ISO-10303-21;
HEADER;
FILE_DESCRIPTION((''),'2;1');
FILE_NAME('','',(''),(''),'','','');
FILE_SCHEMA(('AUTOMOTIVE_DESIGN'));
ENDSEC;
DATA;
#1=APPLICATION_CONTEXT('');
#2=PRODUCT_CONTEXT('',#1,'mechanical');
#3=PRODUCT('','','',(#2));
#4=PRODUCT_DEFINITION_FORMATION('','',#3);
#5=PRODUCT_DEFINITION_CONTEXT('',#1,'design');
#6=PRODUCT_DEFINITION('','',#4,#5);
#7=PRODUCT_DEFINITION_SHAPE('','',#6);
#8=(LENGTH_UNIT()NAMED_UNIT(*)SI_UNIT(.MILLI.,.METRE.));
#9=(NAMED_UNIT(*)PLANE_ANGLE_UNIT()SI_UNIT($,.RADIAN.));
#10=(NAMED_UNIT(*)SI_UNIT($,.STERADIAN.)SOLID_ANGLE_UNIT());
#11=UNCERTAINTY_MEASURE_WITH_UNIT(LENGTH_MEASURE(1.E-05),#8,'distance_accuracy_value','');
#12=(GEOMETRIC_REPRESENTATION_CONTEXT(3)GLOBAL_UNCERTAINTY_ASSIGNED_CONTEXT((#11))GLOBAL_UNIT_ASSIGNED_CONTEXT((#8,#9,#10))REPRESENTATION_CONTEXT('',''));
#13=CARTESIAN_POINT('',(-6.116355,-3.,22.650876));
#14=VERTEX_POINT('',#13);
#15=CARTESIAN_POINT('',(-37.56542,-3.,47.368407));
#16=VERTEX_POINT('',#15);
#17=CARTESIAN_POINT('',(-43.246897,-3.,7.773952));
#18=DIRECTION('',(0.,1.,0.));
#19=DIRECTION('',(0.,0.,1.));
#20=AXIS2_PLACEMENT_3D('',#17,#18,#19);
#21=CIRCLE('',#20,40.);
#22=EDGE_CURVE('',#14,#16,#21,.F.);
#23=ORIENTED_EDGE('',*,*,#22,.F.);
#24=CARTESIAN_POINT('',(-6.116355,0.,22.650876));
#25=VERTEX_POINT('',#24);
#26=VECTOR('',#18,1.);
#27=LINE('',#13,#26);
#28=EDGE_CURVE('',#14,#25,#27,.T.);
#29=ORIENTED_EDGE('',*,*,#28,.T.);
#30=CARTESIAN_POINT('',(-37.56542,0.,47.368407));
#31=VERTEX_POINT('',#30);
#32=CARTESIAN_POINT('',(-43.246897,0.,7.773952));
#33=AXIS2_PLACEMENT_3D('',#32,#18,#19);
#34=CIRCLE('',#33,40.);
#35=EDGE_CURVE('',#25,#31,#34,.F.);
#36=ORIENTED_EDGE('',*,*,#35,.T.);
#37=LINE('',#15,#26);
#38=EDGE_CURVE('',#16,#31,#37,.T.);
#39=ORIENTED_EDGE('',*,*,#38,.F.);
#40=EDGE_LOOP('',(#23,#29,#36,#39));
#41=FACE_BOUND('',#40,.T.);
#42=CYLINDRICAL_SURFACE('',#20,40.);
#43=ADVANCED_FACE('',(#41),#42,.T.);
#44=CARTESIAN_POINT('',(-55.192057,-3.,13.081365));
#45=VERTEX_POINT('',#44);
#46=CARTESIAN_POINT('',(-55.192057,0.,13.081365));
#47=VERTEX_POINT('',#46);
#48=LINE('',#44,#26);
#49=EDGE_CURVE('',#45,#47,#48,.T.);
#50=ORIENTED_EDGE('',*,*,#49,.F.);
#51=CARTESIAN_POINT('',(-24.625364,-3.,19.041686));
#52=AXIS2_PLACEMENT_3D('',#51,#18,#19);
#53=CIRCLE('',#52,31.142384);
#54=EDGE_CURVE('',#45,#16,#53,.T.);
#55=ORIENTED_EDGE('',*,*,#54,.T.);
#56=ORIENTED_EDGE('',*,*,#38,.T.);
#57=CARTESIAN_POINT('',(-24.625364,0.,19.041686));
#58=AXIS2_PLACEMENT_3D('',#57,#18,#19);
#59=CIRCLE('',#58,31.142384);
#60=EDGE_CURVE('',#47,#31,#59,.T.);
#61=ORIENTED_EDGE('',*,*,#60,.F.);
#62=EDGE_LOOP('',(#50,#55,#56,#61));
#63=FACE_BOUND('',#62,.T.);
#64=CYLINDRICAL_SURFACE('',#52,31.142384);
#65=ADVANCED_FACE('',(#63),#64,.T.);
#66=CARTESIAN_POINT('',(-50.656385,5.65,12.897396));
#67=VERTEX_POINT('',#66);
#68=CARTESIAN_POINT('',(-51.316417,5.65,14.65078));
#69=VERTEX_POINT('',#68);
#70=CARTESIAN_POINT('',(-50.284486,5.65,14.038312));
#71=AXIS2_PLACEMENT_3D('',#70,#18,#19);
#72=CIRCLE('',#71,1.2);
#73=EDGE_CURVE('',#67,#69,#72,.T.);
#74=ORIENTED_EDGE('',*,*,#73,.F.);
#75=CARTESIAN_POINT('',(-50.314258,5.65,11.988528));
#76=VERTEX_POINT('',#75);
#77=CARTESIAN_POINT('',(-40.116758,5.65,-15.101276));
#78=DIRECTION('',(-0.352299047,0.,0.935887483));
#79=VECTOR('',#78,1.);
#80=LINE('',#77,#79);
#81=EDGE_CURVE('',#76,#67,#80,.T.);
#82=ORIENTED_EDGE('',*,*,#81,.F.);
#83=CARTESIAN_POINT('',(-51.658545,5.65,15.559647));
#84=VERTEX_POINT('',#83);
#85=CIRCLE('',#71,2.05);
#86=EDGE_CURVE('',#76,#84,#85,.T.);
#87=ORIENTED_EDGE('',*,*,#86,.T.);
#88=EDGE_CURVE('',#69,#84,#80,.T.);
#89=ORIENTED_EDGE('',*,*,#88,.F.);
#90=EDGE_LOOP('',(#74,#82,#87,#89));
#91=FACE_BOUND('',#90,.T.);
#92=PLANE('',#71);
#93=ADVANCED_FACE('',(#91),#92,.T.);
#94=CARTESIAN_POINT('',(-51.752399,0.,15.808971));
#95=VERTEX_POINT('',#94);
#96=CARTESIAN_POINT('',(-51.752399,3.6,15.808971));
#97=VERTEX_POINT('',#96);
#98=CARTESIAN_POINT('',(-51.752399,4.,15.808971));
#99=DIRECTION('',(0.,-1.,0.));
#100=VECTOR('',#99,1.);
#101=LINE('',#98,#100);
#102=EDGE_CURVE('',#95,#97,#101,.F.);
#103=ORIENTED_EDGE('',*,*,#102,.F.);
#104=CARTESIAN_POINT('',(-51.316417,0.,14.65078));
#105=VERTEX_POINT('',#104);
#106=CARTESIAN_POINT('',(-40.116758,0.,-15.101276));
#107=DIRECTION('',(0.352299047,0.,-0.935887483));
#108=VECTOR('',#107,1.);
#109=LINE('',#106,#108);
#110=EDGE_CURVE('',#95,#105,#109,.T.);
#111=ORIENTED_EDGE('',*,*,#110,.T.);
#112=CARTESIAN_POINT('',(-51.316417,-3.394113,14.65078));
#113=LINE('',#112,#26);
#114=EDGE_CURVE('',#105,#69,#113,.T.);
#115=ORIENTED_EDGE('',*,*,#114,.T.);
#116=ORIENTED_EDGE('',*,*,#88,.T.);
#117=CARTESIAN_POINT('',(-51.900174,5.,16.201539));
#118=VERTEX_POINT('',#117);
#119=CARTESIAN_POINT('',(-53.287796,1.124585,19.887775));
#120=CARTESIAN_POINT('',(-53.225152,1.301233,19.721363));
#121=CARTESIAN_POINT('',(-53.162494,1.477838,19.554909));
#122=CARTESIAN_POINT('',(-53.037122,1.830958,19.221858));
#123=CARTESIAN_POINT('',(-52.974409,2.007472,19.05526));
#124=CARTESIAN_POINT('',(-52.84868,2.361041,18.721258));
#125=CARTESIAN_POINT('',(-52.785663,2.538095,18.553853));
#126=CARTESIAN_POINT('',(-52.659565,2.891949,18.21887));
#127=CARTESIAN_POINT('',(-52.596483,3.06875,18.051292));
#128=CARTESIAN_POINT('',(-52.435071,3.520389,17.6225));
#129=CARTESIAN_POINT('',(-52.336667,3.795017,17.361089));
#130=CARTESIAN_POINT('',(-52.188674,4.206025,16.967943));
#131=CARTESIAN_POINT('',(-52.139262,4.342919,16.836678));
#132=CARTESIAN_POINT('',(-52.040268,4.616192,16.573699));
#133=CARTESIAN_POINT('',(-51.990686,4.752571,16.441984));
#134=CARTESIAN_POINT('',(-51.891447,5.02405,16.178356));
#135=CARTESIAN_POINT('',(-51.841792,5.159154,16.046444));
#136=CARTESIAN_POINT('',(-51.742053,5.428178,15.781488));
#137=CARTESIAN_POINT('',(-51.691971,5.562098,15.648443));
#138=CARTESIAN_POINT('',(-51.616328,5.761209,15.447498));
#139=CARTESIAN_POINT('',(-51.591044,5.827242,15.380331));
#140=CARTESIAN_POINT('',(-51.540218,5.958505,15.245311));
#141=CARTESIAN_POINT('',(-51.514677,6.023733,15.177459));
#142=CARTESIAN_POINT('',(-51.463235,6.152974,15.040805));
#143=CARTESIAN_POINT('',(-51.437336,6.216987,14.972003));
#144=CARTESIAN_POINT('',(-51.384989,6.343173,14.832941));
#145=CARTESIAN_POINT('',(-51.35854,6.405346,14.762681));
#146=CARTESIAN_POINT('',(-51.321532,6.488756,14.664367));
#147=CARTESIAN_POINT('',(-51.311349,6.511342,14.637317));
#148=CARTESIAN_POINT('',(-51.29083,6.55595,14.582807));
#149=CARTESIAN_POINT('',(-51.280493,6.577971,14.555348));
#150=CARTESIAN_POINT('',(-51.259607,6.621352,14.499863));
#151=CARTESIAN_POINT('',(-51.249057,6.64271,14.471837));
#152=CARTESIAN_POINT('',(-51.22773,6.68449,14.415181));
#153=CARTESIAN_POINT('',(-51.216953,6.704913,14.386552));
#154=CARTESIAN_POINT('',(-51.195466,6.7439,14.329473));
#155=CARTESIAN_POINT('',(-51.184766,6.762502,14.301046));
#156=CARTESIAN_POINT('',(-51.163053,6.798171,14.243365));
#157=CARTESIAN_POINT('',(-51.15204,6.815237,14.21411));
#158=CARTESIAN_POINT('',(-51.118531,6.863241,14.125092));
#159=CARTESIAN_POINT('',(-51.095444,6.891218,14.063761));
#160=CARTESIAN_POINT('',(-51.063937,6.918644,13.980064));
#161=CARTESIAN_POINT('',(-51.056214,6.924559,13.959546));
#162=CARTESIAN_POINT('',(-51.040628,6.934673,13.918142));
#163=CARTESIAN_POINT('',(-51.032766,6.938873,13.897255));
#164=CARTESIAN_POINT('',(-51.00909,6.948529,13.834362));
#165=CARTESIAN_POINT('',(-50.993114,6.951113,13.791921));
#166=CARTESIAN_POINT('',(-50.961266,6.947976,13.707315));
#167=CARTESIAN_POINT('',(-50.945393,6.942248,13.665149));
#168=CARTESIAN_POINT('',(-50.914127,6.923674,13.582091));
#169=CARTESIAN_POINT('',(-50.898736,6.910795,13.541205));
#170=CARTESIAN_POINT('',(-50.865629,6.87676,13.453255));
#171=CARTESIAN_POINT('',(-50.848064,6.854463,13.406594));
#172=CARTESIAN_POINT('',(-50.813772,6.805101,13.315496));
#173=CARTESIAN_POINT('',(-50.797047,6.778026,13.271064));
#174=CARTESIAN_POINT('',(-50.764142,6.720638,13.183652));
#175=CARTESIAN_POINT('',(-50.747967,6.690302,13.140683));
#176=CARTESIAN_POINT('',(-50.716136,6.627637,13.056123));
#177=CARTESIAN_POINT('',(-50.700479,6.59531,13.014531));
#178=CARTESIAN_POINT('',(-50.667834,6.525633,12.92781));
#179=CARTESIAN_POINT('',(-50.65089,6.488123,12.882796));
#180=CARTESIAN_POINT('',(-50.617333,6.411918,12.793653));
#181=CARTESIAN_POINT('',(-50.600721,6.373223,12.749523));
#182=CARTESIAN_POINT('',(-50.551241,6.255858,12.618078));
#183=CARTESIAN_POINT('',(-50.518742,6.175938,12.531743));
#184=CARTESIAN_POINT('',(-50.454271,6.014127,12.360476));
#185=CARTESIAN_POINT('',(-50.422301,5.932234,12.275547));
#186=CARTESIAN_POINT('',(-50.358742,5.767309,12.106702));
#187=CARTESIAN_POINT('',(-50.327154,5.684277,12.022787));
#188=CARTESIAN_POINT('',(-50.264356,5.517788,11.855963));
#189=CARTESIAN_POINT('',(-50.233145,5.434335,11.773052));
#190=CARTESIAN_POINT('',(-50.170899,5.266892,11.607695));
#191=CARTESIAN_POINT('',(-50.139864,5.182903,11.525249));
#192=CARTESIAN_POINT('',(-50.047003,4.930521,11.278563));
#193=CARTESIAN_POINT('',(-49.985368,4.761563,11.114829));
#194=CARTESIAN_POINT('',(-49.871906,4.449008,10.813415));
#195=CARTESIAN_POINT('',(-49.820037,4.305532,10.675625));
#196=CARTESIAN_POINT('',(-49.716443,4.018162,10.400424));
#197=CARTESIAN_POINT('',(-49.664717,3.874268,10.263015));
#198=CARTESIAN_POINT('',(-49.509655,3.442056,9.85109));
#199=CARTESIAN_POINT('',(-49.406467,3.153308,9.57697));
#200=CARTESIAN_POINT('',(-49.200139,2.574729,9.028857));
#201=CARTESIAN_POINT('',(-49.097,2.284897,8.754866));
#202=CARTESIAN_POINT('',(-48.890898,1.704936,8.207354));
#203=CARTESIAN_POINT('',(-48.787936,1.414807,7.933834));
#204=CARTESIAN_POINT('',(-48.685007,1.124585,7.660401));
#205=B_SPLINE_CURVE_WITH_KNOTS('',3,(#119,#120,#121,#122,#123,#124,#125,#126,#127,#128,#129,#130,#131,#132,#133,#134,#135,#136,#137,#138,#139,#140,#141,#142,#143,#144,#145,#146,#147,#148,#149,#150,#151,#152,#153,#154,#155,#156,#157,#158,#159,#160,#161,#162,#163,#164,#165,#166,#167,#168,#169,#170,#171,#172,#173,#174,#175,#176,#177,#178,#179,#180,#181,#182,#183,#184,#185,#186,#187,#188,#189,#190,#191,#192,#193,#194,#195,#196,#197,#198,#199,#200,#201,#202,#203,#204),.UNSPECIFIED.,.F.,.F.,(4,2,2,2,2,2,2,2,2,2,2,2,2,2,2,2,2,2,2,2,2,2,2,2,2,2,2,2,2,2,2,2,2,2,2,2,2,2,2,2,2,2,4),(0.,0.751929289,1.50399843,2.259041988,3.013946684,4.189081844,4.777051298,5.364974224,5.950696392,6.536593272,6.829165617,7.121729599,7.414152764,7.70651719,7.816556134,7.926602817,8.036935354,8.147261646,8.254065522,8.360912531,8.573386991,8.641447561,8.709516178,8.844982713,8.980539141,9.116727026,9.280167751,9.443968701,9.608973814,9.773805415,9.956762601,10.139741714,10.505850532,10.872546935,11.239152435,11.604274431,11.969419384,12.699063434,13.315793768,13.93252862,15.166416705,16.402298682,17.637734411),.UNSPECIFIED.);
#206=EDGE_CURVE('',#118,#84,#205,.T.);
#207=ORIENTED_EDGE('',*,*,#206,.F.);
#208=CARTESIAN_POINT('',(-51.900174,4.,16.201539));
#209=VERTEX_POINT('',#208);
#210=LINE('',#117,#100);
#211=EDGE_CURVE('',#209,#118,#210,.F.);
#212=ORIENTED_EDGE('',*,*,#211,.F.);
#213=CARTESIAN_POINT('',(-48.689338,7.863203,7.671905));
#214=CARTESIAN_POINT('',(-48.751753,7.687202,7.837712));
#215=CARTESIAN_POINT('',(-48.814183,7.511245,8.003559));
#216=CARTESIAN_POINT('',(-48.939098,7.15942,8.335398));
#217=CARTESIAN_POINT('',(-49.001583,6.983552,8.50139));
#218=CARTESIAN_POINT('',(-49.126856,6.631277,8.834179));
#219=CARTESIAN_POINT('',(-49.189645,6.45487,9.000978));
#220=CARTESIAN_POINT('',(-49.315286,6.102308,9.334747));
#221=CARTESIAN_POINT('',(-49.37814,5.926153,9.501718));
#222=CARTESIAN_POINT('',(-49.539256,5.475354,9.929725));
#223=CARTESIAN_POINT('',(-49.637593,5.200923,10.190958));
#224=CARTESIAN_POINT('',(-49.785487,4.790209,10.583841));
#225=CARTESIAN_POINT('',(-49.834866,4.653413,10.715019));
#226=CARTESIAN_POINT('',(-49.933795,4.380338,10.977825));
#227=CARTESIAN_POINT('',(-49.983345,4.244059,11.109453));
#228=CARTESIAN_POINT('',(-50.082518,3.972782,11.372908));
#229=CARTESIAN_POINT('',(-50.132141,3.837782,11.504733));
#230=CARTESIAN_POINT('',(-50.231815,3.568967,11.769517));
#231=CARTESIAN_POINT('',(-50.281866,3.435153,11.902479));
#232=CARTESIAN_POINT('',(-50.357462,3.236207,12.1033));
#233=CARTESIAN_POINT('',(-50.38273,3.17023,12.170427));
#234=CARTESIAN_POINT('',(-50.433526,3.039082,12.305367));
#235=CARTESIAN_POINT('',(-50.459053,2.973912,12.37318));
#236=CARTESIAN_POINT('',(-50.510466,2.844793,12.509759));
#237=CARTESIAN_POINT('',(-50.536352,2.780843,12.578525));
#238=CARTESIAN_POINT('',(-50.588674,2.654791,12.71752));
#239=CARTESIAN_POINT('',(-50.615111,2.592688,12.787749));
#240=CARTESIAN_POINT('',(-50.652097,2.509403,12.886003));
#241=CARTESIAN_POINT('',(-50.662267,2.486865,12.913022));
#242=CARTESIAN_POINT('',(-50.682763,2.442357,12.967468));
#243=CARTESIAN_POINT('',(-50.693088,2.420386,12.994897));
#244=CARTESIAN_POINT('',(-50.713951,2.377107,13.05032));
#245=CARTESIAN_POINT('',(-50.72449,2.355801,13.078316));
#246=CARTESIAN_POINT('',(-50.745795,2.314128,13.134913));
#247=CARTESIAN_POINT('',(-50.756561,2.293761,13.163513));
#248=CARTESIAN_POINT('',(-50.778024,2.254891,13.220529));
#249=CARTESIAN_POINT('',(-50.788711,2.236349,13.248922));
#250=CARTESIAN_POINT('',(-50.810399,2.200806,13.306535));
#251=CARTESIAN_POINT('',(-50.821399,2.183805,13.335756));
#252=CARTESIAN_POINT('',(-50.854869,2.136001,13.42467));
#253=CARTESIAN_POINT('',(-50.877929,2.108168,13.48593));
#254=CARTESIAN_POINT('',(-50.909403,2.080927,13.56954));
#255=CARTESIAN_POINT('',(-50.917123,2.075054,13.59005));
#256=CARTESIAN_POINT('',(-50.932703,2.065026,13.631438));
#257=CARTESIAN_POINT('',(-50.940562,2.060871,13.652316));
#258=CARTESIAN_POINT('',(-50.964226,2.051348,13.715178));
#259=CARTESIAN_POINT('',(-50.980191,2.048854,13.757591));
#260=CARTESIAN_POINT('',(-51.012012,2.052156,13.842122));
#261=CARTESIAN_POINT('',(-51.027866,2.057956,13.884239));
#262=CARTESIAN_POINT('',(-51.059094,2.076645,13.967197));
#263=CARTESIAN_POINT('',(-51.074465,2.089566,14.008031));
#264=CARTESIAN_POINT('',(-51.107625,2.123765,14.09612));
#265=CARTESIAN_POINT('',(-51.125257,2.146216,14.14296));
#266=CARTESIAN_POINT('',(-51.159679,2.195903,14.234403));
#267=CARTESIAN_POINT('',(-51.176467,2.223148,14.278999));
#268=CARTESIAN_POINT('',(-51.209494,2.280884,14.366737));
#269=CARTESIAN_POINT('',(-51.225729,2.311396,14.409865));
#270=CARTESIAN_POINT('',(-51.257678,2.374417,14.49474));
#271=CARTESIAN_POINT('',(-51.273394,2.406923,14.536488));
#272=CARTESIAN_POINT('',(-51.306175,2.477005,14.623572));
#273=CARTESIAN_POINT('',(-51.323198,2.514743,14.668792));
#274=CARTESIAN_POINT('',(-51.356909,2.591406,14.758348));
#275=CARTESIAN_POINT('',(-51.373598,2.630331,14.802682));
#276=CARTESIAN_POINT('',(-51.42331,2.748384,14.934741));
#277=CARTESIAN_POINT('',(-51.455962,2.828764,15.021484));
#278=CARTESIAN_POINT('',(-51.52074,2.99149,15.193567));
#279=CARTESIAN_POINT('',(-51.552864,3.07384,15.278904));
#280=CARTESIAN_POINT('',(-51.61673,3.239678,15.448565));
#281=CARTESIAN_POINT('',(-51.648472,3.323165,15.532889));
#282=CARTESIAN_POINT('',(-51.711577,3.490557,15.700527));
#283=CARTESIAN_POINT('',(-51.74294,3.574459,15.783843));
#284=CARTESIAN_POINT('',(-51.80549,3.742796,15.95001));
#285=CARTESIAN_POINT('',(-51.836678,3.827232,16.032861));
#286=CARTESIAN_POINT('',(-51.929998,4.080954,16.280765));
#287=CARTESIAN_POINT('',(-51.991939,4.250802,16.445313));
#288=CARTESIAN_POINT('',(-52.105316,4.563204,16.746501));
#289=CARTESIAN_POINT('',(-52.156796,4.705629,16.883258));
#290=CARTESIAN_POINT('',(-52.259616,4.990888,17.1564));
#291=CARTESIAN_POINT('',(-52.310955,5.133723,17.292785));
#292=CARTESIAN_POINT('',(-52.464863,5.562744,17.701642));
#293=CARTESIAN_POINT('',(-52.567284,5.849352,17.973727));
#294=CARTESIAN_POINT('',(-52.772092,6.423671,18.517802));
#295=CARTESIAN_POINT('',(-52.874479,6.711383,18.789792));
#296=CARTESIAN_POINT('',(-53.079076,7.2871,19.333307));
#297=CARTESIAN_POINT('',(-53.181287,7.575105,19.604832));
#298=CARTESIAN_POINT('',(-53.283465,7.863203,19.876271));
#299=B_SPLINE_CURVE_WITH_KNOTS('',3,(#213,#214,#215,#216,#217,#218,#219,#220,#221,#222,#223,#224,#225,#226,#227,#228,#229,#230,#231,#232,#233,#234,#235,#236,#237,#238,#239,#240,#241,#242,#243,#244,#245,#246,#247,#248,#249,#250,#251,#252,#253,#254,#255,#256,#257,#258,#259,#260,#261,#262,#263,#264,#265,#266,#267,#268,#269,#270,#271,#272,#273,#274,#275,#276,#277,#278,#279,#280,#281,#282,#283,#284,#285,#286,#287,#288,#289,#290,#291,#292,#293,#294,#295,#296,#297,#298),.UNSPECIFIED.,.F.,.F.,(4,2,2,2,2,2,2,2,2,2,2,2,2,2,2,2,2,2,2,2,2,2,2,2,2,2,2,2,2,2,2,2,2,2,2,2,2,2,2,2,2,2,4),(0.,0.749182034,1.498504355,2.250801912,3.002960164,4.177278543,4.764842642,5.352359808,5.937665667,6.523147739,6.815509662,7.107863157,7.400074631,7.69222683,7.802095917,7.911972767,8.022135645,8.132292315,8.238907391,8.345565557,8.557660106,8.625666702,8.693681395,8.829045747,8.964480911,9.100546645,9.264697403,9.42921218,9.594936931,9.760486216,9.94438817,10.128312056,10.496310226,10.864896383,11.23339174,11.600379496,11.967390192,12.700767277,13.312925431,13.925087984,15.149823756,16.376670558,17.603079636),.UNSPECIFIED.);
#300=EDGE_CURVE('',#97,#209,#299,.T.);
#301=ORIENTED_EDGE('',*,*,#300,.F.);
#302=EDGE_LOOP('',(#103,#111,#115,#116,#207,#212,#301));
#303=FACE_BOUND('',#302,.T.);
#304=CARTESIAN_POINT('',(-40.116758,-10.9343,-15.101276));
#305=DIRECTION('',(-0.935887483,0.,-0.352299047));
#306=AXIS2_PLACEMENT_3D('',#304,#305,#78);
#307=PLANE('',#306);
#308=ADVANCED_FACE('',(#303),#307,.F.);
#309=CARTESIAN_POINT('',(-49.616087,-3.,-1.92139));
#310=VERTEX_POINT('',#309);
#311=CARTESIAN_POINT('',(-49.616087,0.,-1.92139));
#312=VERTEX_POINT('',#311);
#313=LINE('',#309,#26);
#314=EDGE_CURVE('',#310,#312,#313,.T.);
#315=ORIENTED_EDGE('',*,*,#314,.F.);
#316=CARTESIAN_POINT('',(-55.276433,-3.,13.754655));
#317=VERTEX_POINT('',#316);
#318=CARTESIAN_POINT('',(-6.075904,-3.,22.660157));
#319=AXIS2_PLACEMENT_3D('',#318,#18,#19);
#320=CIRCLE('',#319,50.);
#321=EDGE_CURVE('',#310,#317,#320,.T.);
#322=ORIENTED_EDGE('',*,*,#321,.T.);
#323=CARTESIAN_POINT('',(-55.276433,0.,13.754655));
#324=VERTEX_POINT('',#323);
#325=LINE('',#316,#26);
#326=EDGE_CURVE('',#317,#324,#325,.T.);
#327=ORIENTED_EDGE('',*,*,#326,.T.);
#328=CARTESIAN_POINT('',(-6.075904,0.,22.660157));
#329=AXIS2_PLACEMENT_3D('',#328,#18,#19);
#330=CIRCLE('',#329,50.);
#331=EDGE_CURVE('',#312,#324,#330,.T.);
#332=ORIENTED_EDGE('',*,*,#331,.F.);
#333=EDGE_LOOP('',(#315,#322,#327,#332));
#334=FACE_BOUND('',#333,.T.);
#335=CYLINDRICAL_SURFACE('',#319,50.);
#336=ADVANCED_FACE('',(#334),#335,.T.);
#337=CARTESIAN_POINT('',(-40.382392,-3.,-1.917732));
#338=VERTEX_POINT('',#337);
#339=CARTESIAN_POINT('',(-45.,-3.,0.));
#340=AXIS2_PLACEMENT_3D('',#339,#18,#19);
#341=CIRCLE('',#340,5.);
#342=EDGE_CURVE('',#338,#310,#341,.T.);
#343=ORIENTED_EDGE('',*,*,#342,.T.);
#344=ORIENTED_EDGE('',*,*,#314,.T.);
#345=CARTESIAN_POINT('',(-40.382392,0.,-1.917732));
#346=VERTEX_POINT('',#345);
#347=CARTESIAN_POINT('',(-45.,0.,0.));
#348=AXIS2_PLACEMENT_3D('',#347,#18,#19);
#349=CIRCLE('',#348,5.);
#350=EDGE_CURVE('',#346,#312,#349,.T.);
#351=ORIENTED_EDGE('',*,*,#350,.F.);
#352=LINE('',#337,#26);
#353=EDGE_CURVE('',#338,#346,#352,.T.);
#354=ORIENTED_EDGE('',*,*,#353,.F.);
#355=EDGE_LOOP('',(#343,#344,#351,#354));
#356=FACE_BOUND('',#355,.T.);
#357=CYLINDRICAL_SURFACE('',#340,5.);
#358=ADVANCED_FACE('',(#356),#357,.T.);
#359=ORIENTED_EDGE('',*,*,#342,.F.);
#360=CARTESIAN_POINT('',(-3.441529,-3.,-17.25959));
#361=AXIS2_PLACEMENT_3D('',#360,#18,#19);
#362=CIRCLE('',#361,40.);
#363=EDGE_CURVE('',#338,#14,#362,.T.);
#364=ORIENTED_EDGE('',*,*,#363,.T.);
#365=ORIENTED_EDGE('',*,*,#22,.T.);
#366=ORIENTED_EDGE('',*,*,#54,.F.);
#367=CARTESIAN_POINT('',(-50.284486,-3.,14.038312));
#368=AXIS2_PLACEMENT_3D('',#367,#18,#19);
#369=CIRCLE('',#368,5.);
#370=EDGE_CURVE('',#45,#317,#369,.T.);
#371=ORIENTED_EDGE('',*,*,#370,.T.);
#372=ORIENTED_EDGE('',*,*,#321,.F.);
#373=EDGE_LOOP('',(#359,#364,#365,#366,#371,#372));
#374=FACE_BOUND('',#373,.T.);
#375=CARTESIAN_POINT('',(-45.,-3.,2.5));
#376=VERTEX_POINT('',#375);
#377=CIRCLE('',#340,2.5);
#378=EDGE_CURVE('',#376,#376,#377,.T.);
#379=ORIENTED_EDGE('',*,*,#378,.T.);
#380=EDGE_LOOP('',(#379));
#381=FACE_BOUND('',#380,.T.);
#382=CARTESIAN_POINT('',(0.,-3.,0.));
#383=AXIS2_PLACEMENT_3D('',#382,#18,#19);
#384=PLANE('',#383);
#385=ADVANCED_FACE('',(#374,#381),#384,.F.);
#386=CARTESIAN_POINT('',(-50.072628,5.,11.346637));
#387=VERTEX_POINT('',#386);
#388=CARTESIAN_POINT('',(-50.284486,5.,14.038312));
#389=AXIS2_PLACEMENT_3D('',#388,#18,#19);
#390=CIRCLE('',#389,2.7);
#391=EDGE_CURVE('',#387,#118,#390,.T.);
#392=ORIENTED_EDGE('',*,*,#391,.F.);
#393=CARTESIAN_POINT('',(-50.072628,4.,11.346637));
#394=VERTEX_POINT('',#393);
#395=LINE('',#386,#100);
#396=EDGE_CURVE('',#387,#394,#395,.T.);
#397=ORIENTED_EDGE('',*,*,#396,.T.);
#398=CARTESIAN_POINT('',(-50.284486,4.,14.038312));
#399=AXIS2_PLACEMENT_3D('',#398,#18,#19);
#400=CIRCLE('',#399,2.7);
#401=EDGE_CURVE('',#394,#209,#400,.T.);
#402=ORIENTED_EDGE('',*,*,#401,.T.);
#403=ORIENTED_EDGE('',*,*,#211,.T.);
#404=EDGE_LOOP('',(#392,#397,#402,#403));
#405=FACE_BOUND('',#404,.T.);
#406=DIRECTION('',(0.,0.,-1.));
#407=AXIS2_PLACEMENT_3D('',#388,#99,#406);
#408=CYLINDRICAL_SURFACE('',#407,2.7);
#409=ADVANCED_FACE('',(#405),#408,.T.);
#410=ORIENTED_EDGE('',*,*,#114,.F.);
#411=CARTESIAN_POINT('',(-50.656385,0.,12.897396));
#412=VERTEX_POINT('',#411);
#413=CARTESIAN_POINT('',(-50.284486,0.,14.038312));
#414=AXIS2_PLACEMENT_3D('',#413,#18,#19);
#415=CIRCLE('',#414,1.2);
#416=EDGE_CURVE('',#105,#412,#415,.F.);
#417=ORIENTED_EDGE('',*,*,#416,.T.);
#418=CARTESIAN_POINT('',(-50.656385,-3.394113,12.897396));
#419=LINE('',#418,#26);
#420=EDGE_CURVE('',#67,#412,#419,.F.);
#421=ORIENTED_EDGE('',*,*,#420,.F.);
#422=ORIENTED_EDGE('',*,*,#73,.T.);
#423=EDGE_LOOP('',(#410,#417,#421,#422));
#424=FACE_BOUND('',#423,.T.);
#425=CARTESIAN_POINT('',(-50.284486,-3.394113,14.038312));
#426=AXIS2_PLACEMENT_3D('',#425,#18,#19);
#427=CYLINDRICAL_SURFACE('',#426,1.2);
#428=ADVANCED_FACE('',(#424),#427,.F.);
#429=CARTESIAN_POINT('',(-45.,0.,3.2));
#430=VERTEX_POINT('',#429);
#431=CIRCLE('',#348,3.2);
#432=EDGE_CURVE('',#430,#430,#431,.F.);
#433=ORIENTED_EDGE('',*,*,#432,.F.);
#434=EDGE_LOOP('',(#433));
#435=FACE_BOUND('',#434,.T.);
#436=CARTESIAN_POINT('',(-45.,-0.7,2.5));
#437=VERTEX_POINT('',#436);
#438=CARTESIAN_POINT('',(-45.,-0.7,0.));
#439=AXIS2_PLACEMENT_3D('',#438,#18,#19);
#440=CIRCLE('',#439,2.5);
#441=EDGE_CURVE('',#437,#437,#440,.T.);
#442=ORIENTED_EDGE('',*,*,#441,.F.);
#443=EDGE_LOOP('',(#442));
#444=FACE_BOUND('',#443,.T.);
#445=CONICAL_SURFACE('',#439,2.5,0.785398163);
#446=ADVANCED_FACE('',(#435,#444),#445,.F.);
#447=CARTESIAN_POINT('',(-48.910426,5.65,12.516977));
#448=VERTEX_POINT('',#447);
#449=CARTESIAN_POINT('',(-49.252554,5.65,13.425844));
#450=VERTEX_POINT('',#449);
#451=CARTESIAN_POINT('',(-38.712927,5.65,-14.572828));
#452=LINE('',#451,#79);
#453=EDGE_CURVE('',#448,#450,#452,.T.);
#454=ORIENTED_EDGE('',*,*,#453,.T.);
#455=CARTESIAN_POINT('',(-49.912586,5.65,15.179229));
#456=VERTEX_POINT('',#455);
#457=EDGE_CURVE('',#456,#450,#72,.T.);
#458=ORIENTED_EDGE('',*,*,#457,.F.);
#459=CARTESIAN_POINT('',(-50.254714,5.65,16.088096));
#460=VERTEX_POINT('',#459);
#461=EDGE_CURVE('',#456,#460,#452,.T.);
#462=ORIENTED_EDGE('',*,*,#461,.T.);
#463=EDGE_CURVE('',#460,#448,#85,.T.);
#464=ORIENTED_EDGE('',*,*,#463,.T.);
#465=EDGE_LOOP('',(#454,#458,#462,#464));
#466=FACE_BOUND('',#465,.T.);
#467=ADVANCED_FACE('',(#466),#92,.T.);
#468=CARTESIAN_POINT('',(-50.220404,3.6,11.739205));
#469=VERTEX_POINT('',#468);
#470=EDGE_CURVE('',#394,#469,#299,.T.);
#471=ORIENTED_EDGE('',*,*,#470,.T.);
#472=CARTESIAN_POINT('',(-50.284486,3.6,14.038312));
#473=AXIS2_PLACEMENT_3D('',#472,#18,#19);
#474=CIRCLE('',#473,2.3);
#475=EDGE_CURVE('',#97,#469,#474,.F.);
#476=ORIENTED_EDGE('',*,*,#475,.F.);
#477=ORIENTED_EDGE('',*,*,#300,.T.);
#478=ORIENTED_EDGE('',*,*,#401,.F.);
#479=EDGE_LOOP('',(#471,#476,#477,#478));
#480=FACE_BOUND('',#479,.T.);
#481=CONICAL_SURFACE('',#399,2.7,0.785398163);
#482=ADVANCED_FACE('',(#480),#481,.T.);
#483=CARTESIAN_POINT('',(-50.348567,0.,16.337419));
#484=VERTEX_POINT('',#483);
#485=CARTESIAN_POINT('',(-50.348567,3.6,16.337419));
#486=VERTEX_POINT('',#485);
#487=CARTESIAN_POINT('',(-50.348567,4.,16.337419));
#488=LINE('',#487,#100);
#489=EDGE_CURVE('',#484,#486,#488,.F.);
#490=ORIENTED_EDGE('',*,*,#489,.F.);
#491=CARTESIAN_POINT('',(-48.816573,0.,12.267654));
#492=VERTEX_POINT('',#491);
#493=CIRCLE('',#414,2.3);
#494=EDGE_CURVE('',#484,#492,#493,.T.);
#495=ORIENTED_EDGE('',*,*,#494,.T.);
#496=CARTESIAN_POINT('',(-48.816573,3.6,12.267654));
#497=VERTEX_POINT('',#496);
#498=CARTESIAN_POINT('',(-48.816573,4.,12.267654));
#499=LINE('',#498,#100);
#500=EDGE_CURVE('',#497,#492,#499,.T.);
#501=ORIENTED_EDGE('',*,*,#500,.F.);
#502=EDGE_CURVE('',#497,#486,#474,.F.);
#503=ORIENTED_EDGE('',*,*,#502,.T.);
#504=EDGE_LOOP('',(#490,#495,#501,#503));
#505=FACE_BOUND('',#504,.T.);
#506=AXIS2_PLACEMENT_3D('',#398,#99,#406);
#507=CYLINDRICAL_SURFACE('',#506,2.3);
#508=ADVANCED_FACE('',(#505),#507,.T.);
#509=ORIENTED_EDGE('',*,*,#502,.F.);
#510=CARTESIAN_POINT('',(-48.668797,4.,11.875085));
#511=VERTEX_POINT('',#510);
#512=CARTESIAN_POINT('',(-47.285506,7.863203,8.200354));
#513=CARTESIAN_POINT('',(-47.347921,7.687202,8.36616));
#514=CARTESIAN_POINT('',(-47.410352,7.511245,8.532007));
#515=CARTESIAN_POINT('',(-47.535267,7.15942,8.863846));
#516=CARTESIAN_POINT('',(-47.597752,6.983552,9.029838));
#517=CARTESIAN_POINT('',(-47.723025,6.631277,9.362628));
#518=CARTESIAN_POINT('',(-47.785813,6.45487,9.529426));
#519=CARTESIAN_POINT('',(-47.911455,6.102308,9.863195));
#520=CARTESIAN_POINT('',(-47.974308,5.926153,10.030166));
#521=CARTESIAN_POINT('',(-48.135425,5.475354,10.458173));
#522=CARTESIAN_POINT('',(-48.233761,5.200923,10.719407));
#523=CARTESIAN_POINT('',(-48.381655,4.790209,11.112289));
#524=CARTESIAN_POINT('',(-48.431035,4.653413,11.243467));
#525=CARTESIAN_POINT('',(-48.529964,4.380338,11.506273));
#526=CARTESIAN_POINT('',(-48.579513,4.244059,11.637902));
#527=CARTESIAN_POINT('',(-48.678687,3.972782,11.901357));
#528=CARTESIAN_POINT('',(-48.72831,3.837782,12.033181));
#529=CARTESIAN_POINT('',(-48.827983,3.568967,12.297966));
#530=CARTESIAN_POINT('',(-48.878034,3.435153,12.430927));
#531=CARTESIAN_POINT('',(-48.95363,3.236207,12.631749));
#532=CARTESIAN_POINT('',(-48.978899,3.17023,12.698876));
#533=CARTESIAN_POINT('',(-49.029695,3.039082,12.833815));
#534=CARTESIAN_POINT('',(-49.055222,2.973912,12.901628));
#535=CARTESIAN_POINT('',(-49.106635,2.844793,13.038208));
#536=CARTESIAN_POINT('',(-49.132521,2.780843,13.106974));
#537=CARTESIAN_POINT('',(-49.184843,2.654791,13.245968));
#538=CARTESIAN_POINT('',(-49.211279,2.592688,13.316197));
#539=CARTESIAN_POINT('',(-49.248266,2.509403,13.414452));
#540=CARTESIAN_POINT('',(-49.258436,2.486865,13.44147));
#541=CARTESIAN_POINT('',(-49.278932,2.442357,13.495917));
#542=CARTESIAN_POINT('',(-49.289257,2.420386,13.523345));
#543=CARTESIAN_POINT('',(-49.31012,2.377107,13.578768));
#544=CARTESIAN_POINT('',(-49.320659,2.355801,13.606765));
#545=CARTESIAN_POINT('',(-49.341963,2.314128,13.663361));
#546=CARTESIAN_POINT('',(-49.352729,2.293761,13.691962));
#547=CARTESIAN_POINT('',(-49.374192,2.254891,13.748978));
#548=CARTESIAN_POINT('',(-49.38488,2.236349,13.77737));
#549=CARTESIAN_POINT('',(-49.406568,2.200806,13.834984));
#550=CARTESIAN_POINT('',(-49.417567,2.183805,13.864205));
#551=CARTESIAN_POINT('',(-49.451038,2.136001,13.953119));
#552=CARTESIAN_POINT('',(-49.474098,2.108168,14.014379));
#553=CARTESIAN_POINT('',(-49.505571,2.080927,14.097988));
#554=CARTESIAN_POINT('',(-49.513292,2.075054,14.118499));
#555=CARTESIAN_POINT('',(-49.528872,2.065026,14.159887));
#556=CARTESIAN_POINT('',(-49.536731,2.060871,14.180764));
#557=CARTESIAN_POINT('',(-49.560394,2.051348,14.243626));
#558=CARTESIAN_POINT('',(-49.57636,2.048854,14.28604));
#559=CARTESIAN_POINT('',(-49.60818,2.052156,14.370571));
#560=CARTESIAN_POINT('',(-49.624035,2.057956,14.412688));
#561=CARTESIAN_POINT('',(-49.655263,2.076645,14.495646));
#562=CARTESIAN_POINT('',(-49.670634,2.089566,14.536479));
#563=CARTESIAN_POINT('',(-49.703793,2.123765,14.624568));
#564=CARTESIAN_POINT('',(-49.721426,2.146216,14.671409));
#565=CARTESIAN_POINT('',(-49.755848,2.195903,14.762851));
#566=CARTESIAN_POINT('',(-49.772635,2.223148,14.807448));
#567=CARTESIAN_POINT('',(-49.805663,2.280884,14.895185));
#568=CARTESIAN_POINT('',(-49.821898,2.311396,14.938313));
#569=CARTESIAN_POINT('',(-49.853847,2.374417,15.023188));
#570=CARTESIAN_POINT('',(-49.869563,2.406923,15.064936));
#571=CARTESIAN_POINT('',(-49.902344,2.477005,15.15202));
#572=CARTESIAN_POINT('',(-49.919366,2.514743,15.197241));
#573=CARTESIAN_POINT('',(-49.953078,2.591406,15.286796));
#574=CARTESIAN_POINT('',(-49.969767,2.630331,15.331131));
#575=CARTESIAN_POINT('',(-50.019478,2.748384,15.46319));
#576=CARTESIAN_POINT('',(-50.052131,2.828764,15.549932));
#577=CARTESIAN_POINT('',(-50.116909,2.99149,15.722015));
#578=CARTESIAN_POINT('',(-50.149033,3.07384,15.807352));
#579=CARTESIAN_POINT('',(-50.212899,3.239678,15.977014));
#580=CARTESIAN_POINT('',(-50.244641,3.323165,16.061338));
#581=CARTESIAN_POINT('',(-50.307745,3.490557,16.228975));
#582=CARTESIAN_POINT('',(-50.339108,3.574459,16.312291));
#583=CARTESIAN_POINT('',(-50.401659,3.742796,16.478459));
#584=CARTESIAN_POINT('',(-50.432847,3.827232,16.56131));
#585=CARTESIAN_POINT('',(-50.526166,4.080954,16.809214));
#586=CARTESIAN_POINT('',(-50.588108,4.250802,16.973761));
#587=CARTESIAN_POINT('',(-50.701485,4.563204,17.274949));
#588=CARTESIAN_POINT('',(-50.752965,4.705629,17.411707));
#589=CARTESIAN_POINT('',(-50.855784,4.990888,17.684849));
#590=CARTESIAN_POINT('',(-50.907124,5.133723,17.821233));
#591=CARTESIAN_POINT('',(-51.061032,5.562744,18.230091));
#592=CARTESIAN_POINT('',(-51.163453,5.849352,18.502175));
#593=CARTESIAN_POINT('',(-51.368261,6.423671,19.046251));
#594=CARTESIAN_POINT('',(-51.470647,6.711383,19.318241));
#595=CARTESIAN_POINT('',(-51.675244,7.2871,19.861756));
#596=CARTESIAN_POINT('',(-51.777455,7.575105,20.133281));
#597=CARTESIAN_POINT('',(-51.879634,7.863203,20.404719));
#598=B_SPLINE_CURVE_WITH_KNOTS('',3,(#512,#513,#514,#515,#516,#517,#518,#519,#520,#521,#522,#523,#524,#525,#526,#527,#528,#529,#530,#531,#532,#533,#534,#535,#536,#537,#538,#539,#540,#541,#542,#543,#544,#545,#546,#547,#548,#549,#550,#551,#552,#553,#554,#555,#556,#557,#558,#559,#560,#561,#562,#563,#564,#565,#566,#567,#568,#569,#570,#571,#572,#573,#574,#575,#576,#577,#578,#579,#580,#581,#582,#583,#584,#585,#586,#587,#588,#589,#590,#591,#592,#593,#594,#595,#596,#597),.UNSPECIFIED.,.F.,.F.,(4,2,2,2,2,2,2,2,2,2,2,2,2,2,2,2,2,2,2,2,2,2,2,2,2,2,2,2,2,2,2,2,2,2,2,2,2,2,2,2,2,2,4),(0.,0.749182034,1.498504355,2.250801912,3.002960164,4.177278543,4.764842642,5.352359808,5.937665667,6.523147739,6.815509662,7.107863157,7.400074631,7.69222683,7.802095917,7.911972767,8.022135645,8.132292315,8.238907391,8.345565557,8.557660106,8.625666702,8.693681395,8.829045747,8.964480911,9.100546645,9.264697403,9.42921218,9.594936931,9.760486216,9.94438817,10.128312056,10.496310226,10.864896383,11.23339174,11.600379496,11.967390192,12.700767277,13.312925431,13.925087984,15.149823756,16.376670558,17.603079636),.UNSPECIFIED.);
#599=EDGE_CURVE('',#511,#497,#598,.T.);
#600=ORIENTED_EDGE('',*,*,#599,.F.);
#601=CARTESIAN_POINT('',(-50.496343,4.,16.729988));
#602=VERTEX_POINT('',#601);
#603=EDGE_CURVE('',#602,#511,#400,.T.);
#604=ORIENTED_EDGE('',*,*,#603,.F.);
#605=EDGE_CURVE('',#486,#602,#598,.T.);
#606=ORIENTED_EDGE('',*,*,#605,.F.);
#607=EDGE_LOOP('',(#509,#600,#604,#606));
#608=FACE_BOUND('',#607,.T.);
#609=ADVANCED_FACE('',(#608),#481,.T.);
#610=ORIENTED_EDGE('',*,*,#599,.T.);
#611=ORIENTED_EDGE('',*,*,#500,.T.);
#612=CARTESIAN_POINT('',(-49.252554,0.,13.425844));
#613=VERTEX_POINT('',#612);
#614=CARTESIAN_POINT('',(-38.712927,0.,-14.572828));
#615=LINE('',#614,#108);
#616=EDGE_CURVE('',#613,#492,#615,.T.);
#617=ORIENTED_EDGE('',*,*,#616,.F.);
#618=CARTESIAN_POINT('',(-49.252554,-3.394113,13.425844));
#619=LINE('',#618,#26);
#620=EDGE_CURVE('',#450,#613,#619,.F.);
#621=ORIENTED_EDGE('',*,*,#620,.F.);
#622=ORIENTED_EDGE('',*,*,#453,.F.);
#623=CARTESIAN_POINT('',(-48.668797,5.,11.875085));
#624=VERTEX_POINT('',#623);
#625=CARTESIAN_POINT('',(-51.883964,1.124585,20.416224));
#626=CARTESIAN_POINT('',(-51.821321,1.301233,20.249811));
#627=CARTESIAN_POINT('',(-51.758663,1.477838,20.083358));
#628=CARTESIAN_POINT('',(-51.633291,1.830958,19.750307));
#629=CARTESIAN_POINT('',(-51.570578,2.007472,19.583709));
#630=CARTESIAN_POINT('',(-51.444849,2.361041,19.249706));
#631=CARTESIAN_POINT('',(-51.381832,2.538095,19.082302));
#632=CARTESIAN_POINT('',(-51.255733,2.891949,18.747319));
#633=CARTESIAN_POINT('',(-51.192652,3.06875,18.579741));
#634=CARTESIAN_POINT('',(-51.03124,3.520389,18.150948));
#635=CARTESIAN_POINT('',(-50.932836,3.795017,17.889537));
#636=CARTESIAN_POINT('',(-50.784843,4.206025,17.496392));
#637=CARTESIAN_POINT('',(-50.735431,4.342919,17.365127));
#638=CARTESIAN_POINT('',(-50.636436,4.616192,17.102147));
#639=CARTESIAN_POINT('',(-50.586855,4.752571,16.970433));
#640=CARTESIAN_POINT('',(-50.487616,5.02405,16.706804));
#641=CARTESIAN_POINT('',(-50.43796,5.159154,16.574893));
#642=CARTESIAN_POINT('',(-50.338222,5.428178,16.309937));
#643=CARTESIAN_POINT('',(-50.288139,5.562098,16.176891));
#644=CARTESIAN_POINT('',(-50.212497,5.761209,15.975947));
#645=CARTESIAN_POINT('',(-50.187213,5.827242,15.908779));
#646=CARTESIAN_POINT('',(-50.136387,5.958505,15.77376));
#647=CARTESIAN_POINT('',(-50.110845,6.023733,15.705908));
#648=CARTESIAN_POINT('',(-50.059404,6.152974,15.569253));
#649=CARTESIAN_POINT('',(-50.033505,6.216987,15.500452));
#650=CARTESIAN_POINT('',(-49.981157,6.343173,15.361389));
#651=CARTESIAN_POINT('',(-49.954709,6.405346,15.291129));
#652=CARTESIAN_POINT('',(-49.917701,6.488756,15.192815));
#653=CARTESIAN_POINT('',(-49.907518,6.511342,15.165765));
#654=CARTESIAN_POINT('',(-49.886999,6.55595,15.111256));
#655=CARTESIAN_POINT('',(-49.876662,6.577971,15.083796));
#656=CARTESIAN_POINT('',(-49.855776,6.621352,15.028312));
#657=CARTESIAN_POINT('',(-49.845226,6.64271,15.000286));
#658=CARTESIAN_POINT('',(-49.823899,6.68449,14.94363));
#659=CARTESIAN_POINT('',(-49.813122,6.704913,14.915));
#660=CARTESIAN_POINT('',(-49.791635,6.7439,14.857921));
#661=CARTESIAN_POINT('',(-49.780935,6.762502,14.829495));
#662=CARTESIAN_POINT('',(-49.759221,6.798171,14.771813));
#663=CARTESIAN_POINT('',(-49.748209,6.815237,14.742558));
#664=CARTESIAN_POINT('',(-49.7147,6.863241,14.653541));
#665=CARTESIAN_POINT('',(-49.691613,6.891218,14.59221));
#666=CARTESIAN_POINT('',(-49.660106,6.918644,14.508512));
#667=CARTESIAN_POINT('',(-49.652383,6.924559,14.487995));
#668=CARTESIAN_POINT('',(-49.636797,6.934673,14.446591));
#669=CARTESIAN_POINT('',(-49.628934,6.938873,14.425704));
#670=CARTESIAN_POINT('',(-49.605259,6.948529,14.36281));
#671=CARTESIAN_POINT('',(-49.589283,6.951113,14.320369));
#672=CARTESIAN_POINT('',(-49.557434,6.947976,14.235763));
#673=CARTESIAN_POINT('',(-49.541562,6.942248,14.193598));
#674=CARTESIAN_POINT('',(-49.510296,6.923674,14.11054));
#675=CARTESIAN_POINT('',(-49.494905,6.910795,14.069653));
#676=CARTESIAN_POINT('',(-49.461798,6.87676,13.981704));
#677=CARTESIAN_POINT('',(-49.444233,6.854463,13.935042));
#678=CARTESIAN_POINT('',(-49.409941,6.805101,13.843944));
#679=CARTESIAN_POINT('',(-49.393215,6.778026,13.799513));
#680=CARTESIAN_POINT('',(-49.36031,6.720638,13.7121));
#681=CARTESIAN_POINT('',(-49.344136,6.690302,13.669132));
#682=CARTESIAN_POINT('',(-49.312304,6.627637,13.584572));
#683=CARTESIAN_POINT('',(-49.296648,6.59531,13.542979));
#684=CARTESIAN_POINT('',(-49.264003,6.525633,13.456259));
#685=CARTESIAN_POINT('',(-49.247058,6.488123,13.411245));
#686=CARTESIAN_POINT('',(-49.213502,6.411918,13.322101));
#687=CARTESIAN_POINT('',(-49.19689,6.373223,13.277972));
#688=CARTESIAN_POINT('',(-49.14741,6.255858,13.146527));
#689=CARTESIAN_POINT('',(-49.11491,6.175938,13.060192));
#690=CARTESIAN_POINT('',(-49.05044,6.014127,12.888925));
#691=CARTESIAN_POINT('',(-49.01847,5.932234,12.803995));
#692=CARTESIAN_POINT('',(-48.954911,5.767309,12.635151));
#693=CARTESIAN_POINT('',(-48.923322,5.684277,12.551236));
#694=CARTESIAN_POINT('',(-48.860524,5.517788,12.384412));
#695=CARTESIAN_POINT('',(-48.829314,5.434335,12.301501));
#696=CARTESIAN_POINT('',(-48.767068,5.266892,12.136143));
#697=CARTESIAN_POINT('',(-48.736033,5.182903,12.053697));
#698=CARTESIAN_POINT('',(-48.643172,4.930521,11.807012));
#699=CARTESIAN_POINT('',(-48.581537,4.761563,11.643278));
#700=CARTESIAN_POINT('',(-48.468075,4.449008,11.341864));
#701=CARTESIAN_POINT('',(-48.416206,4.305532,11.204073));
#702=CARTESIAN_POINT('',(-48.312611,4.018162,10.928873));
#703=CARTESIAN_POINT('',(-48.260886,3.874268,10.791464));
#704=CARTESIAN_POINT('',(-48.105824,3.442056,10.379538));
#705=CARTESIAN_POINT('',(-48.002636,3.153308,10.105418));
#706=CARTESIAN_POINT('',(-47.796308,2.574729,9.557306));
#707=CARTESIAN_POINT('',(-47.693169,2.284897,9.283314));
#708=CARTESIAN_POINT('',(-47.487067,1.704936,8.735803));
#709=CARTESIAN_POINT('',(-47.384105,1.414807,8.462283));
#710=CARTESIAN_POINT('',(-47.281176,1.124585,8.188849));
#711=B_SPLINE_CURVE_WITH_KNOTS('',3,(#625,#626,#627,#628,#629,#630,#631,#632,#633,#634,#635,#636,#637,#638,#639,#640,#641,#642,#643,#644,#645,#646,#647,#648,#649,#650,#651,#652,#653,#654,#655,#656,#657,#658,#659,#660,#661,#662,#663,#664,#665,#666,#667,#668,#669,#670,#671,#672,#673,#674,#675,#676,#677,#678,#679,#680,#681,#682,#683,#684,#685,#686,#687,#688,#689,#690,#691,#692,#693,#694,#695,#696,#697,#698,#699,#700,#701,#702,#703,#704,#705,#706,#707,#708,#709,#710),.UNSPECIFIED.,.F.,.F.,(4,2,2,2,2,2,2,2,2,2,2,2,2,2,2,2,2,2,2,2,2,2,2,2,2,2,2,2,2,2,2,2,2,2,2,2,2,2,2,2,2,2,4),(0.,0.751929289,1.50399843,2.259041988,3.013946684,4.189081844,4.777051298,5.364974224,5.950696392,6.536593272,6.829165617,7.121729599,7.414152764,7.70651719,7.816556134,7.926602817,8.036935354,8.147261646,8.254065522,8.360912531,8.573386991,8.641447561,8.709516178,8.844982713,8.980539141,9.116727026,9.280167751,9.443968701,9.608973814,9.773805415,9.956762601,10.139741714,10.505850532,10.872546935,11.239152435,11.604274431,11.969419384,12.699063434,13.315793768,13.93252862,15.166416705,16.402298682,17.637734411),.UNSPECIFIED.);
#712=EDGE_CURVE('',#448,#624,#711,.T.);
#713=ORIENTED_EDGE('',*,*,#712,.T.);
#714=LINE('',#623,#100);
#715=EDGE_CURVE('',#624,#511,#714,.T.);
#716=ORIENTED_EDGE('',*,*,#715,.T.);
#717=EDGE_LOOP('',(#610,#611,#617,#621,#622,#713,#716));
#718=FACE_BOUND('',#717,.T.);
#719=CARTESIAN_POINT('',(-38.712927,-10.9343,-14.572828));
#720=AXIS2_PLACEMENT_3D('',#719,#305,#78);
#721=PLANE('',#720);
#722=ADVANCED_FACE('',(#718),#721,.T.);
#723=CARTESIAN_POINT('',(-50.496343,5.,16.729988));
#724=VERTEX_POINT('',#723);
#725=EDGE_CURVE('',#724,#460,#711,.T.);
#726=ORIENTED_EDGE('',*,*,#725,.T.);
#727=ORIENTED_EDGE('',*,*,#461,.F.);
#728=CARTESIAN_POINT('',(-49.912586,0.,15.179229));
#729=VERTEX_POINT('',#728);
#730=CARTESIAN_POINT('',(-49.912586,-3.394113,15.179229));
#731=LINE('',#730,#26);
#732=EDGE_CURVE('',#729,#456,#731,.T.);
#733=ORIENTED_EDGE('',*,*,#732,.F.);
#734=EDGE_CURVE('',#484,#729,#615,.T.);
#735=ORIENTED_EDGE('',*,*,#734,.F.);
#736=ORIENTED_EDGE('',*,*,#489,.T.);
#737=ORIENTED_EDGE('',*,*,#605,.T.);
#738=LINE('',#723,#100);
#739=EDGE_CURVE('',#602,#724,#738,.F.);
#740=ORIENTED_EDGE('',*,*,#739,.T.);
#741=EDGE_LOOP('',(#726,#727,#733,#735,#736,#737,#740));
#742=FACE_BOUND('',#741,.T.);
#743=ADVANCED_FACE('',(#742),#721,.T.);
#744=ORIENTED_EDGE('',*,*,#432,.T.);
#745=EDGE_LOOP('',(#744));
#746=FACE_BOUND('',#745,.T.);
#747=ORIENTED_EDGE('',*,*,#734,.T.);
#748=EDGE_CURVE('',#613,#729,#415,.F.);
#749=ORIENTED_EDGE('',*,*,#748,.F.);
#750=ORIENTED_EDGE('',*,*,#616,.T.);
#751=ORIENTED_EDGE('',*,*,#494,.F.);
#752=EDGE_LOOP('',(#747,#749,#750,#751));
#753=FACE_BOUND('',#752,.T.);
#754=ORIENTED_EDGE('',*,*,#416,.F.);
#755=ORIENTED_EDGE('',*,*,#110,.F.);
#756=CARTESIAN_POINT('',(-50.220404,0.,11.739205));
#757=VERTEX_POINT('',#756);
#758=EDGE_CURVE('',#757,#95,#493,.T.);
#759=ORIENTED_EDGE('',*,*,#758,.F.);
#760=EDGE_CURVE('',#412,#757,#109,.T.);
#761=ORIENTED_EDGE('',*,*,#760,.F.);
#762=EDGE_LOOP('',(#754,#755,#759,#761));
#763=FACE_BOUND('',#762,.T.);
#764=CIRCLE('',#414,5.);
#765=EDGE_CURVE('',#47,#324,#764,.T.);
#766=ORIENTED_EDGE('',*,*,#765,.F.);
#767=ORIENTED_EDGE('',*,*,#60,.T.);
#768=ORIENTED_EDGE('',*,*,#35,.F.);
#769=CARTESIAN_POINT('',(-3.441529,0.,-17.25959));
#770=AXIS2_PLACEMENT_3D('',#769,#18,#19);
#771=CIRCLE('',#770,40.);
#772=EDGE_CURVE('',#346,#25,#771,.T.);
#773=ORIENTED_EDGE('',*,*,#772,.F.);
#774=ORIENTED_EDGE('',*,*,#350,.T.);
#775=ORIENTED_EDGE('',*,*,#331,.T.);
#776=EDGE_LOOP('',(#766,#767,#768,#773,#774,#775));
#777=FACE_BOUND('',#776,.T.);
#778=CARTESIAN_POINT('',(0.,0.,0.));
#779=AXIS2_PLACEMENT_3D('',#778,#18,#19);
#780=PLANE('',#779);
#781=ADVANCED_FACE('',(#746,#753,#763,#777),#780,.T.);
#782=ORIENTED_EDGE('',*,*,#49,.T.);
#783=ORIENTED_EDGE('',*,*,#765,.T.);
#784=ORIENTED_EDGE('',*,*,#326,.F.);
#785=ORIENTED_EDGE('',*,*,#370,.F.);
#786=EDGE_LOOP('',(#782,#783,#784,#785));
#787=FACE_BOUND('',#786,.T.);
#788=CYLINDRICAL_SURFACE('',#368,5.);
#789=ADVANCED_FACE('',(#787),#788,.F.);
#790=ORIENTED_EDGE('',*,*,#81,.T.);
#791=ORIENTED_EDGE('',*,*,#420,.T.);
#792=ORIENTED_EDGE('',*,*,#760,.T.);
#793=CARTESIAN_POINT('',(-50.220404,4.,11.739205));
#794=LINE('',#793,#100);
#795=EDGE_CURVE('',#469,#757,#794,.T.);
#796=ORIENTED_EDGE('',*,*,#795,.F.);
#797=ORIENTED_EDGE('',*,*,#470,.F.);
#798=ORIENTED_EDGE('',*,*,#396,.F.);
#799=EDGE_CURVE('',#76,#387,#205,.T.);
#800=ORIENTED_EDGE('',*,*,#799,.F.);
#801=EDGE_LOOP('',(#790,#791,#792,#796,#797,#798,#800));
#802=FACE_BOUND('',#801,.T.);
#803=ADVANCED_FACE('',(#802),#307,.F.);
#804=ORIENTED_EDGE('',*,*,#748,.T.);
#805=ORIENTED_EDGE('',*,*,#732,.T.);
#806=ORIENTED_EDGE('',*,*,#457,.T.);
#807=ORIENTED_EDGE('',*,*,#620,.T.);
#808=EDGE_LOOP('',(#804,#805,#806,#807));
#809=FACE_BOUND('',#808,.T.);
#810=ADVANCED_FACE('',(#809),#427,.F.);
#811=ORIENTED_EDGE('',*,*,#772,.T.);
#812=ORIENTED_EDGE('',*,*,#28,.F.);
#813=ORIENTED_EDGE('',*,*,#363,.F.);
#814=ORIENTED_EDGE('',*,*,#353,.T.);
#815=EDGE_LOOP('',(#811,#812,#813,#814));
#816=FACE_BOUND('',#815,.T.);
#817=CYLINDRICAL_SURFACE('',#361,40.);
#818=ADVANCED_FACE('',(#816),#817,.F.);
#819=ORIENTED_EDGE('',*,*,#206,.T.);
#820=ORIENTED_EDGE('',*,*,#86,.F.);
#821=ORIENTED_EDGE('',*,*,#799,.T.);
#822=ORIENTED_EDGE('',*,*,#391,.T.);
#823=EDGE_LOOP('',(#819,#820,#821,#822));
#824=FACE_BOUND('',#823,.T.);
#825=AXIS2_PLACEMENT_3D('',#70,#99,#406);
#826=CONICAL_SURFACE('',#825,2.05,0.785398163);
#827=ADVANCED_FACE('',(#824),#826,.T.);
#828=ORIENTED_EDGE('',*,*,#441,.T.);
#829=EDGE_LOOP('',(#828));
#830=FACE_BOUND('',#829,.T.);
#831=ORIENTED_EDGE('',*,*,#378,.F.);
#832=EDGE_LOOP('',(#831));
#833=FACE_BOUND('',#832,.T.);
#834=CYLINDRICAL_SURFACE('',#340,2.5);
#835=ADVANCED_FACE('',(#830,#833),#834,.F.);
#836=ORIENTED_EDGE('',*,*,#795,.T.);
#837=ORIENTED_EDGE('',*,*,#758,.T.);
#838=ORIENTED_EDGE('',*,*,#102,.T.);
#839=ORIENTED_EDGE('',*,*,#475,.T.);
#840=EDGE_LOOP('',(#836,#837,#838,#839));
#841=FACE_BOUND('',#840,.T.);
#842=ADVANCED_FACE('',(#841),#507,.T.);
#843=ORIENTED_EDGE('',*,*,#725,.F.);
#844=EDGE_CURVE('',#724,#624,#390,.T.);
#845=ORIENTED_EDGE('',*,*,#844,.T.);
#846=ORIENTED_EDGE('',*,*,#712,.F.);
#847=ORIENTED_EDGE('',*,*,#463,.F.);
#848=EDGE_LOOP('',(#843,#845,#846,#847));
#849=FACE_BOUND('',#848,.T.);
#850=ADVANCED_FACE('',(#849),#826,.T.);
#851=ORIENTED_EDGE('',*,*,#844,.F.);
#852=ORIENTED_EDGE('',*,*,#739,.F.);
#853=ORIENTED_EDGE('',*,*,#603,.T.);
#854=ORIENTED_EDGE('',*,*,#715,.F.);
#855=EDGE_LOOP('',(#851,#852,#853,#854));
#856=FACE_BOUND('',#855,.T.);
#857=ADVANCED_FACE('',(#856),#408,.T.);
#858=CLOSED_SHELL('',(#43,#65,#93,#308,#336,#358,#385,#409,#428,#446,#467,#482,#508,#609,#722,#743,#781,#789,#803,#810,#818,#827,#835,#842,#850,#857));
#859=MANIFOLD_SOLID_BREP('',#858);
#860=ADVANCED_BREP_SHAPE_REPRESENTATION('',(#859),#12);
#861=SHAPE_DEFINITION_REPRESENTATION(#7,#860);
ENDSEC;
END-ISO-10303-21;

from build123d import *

# Parameters (mm, degrees)
SKETCH1_R           = 2.5
BOSS_EXTRUDE2_DEPTH = 3
SKETCH2_R           = 2.3
BOSS_EXTRUDE3_DEPTH = 4
SKETCH3_R           = 2.7
BOSS_EXTRUDE4_DEPTH = 1
CHAMFER1_SIZE       = 0.4
SKETCH4_R           = 2.05
BOSS_EXTRUDE5_DEPTH = 0.65
CHAMFER2_SIZE       = 0.65
CUT_EXTRUDE1_REACH  = 75.679
SKETCH7_R           = 1.2
CUT_EXTRUDE2_DEPTH  = 5.65
CHAMFER3_SIZE       = 0.7


with BuildPart() as part:
    # Sketch1 → Boss-Extrude2 (new body)
    with BuildSketch(Plane(origin=(0, 0, 0), x_dir=(1, 0, 0), z_dir=(0, 1, 0))):
        with BuildLine():
            ThreePointArc((-6.116355206, -22.650875646), (-26.749356674, -15.248026431), (-40.382392076, 1.917732271))
            ThreePointArc((-40.382392076, 1.917732271), (-44.99801909, 4.999999608), (-49.616086933, 1.921390494))
            ThreePointArc((-49.616086933, 1.921390494), (-53.104028793, -5.679123666), (-55.276433102, -13.75465544))
            ThreePointArc((-55.276433102, -13.75465544), (-55.245679697, -13.416577441), (-55.192056675, -13.081365453))
            ThreePointArc((-55.192056675, -13.081365453), (-52.322107352, -33.280314666), (-37.56541985, -47.368406531))
            ThreePointArc((-37.56541985, -47.368406531), (-18.529366308, -39.223016825), (-6.116355206, -22.650875646))
        make_face()
        with Locations(Location((-45, 0, 0), (0, 0, 270))):
            Circle(SKETCH1_R, mode=Mode.SUBTRACT)
    extrude(amount=-BOSS_EXTRUDE2_DEPTH)

    # Sketch2 → Boss-Extrude3 (add)
    with BuildSketch(Plane(origin=(0, 0, 0), x_dir=(1, 0, 0), z_dir=(0, 1, 0))):
        with Locations(Location((-50.284485705, -14.03831225, 0), (0, 0, 270))):
            Circle(SKETCH2_R)
    extrude(amount=BOSS_EXTRUDE3_DEPTH)

    # Sketch3 → Boss-Extrude4 (add)
    with BuildSketch(Plane(origin=(0, 4, 0), x_dir=(1, 0, 0), z_dir=(0, 1, 0))):
        with Locations(Location((-50.284485705, -14.03831225, 0), (0, 0, 270))):
            Circle(SKETCH3_R)
    extrude(amount=BOSS_EXTRUDE4_DEPTH)

    # Chamfer1
    chamfer1_edges = [part.edges().sort_by_distance(p)[0] for p in [
        (-50.284485705, 4, 11.73831225),
    ]]
    chamfer(chamfer1_edges, length=CHAMFER1_SIZE - 0.0001)  # a hair under: the kernel refuses the full size

    # Sketch4 → Boss-Extrude5 (add)
    with BuildSketch(Plane(origin=(0, 5, 0), x_dir=(1, 0, 0), z_dir=(0, 1, 0))):
        with Locations(Location((-50.284485705, -14.03831225, 0), (0, 0, 270))):
            Circle(SKETCH4_R)
    extrude(amount=BOSS_EXTRUDE5_DEPTH)

    # Chamfer2
    chamfer2_edges = [part.edges().sort_by_distance(p)[0] for p in [
        (-50.284485705, 5, 11.98831225),
    ]]
    chamfer(chamfer2_edges, length=CHAMFER2_SIZE - 0.0001)  # a hair under: the kernel refuses the full size

    # Cut-Extrude1: up to this face of the body (flat: up to its plane)
    cut_extrude1_end = Plane(part.part.faces().sort_by_distance((-35.615181699, 0, 24.623132095))[0])
    # Sketch6 → Cut-Extrude1 (cut, up to the picked face)
    with BuildSketch(Plane(origin=(0, 5.65, 0), x_dir=(1, 0, 0), z_dir=(0, 1, 0)), mode=Mode.PRIVATE) as cut_extrude1_sk1:
        with BuildLine():
            Line((-50.254713835, -16.088096052), (-48.910426349, -12.516977019))
            ThreePointArc((-48.910426349, -12.516977019), (-49.562272658, -12.119742909), (-50.314257574, -11.988528448))
            Line((-50.314257574, -11.988528448), (-51.65854506, -15.559647482))
            ThreePointArc((-51.65854506, -15.559647482), (-51.006698751, -15.956881591), (-50.254713835, -16.088096052))
        make_face()
    cut_extrude1_tool1 = split(extrude(cut_extrude1_sk1.sketch, amount=-CUT_EXTRUDE1_REACH, mode=Mode.PRIVATE), bisect_by=cut_extrude1_end, keep=Keep.BOTH, mode=Mode.PRIVATE)
    # Sketch6 → Cut-Extrude1 (cut, up to the picked face)
    with BuildSketch(Plane(origin=(0, 5.65, 0), x_dir=(1, 0, 0), z_dir=(0, 1, 0)), mode=Mode.PRIVATE) as cut_extrude1_sk2:
        with BuildLine():
            Line((-48.910426349, -12.516977019), (-47.84100442, -9.676042289))
            ThreePointArc((-47.84100442, -9.676042289), (-48.52299047, -9.358874834), (-49.244835645, -9.147593719))
            Line((-49.244835645, -9.147593719), (-50.314257574, -11.988528448))
            ThreePointArc((-50.314257574, -11.988528448), (-49.562272658, -12.119742909), (-48.910426349, -12.516977019))
        make_face()
    cut_extrude1_tool2 = split(extrude(cut_extrude1_sk2.sketch, amount=-CUT_EXTRUDE1_REACH, mode=Mode.PRIVATE), bisect_by=cut_extrude1_end, keep=Keep.BOTH, mode=Mode.PRIVATE)
    # Sketch6 → Cut-Extrude1 (cut, up to the picked face)
    with BuildSketch(Plane(origin=(0, 5.65, 0), x_dir=(1, 0, 0), z_dir=(0, 1, 0)), mode=Mode.PRIVATE) as cut_extrude1_sk3:
        with BuildLine():
            Line((-51.324135764, -18.929030782), (-50.254713835, -16.088096052))
            ThreePointArc((-50.254713835, -16.088096052), (-51.006698751, -15.956881591), (-51.65854506, -15.559647482))
            Line((-51.65854506, -15.559647482), (-52.727966989, -18.400582211))
            ThreePointArc((-52.727966989, -18.400582211), (-52.04598094, -18.717749667), (-51.324135764, -18.929030782))
        make_face()
    cut_extrude1_tool3 = split(extrude(cut_extrude1_sk3.sketch, amount=-CUT_EXTRUDE1_REACH, mode=Mode.PRIVATE), bisect_by=cut_extrude1_end, keep=Keep.BOTH, mode=Mode.PRIVATE)
    # Sketch6 → Cut-Extrude1 (cut, up to the picked face)
    with BuildSketch(Plane(origin=(0, 5.65, 0), x_dir=(1, 0, 0), z_dir=(0, 1, 0)), mode=Mode.PRIVATE) as cut_extrude1_sk4:
        with BuildLine():
            Line((-48.910426349, -12.516977019), (-47.84100442, -9.676042289))
            ThreePointArc((-47.84100442, -9.676042289), (-48.52299047, -9.358874834), (-49.244835645, -9.147593719))
            Line((-49.244835645, -9.147593719), (-50.314257574, -11.988528448))
            ThreePointArc((-50.314257574, -11.988528448), (-49.562272658, -12.119742909), (-48.910426349, -12.516977019))
        make_face()
    cut_extrude1_tool4 = split(extrude(cut_extrude1_sk4.sketch, amount=-CUT_EXTRUDE1_REACH, mode=Mode.PRIVATE), bisect_by=cut_extrude1_end, keep=Keep.BOTH, mode=Mode.PRIVATE)
    # Sketch6 → Cut-Extrude1 (cut, up to the picked face)
    with BuildSketch(Plane(origin=(0, 5.65, 0), x_dir=(1, 0, 0), z_dir=(0, 1, 0)), mode=Mode.PRIVATE) as cut_extrude1_sk5:
        with BuildLine():
            Line((-51.324135764, -18.929030782), (-50.254713835, -16.088096052))
            ThreePointArc((-50.254713835, -16.088096052), (-51.006698751, -15.956881591), (-51.65854506, -15.559647482))
            Line((-51.65854506, -15.559647482), (-52.727966989, -18.400582211))
            ThreePointArc((-52.727966989, -18.400582211), (-52.04598094, -18.717749667), (-51.324135764, -18.929030782))
        make_face()
    cut_extrude1_tool5 = split(extrude(cut_extrude1_sk5.sketch, amount=-CUT_EXTRUDE1_REACH, mode=Mode.PRIVATE), bisect_by=cut_extrude1_end, keep=Keep.BOTH, mode=Mode.PRIVATE)
    add(cut_extrude1_tool1.solids().sort_by(Axis((-50.284486, 5.65, 14.038312), (0, -1, 0)))[0], mode=Mode.SUBTRACT)
    add(cut_extrude1_tool2.solids().sort_by(Axis((-49.05426, 5.65, 10.770199), (0, -1, 0)))[0], mode=Mode.SUBTRACT)
    add(cut_extrude1_tool3.solids().sort_by(Axis((-51.514712, 5.65, 17.306426), (0, -1, 0)))[0], mode=Mode.SUBTRACT)
    add(cut_extrude1_tool4.solids().sort_by(Axis((-49.05426, 5.65, 10.770199), (0, -1, 0)))[0], mode=Mode.SUBTRACT)
    add(cut_extrude1_tool5.solids().sort_by(Axis((-51.514712, 5.65, 17.306426), (0, -1, 0)))[0], mode=Mode.SUBTRACT)

    # Sketch7 → Cut-Extrude2 (cut)
    with BuildSketch(Plane(origin=(0, 5.65, 0), x_dir=(1, 0, 0), z_dir=(0, 1, 0))):
        with Locations((-50.284485705, -14.03831225)):
            Circle(SKETCH7_R)
    extrude(amount=-CUT_EXTRUDE2_DEPTH, mode=Mode.SUBTRACT)

    # Chamfer3
    chamfer3_edges = [part.edges().sort_by_distance(p)[0] for p in [
        (-45, 0, -2.5),
    ]]
    chamfer(chamfer3_edges, length=CHAMFER3_SIZE)


solid = part.part
